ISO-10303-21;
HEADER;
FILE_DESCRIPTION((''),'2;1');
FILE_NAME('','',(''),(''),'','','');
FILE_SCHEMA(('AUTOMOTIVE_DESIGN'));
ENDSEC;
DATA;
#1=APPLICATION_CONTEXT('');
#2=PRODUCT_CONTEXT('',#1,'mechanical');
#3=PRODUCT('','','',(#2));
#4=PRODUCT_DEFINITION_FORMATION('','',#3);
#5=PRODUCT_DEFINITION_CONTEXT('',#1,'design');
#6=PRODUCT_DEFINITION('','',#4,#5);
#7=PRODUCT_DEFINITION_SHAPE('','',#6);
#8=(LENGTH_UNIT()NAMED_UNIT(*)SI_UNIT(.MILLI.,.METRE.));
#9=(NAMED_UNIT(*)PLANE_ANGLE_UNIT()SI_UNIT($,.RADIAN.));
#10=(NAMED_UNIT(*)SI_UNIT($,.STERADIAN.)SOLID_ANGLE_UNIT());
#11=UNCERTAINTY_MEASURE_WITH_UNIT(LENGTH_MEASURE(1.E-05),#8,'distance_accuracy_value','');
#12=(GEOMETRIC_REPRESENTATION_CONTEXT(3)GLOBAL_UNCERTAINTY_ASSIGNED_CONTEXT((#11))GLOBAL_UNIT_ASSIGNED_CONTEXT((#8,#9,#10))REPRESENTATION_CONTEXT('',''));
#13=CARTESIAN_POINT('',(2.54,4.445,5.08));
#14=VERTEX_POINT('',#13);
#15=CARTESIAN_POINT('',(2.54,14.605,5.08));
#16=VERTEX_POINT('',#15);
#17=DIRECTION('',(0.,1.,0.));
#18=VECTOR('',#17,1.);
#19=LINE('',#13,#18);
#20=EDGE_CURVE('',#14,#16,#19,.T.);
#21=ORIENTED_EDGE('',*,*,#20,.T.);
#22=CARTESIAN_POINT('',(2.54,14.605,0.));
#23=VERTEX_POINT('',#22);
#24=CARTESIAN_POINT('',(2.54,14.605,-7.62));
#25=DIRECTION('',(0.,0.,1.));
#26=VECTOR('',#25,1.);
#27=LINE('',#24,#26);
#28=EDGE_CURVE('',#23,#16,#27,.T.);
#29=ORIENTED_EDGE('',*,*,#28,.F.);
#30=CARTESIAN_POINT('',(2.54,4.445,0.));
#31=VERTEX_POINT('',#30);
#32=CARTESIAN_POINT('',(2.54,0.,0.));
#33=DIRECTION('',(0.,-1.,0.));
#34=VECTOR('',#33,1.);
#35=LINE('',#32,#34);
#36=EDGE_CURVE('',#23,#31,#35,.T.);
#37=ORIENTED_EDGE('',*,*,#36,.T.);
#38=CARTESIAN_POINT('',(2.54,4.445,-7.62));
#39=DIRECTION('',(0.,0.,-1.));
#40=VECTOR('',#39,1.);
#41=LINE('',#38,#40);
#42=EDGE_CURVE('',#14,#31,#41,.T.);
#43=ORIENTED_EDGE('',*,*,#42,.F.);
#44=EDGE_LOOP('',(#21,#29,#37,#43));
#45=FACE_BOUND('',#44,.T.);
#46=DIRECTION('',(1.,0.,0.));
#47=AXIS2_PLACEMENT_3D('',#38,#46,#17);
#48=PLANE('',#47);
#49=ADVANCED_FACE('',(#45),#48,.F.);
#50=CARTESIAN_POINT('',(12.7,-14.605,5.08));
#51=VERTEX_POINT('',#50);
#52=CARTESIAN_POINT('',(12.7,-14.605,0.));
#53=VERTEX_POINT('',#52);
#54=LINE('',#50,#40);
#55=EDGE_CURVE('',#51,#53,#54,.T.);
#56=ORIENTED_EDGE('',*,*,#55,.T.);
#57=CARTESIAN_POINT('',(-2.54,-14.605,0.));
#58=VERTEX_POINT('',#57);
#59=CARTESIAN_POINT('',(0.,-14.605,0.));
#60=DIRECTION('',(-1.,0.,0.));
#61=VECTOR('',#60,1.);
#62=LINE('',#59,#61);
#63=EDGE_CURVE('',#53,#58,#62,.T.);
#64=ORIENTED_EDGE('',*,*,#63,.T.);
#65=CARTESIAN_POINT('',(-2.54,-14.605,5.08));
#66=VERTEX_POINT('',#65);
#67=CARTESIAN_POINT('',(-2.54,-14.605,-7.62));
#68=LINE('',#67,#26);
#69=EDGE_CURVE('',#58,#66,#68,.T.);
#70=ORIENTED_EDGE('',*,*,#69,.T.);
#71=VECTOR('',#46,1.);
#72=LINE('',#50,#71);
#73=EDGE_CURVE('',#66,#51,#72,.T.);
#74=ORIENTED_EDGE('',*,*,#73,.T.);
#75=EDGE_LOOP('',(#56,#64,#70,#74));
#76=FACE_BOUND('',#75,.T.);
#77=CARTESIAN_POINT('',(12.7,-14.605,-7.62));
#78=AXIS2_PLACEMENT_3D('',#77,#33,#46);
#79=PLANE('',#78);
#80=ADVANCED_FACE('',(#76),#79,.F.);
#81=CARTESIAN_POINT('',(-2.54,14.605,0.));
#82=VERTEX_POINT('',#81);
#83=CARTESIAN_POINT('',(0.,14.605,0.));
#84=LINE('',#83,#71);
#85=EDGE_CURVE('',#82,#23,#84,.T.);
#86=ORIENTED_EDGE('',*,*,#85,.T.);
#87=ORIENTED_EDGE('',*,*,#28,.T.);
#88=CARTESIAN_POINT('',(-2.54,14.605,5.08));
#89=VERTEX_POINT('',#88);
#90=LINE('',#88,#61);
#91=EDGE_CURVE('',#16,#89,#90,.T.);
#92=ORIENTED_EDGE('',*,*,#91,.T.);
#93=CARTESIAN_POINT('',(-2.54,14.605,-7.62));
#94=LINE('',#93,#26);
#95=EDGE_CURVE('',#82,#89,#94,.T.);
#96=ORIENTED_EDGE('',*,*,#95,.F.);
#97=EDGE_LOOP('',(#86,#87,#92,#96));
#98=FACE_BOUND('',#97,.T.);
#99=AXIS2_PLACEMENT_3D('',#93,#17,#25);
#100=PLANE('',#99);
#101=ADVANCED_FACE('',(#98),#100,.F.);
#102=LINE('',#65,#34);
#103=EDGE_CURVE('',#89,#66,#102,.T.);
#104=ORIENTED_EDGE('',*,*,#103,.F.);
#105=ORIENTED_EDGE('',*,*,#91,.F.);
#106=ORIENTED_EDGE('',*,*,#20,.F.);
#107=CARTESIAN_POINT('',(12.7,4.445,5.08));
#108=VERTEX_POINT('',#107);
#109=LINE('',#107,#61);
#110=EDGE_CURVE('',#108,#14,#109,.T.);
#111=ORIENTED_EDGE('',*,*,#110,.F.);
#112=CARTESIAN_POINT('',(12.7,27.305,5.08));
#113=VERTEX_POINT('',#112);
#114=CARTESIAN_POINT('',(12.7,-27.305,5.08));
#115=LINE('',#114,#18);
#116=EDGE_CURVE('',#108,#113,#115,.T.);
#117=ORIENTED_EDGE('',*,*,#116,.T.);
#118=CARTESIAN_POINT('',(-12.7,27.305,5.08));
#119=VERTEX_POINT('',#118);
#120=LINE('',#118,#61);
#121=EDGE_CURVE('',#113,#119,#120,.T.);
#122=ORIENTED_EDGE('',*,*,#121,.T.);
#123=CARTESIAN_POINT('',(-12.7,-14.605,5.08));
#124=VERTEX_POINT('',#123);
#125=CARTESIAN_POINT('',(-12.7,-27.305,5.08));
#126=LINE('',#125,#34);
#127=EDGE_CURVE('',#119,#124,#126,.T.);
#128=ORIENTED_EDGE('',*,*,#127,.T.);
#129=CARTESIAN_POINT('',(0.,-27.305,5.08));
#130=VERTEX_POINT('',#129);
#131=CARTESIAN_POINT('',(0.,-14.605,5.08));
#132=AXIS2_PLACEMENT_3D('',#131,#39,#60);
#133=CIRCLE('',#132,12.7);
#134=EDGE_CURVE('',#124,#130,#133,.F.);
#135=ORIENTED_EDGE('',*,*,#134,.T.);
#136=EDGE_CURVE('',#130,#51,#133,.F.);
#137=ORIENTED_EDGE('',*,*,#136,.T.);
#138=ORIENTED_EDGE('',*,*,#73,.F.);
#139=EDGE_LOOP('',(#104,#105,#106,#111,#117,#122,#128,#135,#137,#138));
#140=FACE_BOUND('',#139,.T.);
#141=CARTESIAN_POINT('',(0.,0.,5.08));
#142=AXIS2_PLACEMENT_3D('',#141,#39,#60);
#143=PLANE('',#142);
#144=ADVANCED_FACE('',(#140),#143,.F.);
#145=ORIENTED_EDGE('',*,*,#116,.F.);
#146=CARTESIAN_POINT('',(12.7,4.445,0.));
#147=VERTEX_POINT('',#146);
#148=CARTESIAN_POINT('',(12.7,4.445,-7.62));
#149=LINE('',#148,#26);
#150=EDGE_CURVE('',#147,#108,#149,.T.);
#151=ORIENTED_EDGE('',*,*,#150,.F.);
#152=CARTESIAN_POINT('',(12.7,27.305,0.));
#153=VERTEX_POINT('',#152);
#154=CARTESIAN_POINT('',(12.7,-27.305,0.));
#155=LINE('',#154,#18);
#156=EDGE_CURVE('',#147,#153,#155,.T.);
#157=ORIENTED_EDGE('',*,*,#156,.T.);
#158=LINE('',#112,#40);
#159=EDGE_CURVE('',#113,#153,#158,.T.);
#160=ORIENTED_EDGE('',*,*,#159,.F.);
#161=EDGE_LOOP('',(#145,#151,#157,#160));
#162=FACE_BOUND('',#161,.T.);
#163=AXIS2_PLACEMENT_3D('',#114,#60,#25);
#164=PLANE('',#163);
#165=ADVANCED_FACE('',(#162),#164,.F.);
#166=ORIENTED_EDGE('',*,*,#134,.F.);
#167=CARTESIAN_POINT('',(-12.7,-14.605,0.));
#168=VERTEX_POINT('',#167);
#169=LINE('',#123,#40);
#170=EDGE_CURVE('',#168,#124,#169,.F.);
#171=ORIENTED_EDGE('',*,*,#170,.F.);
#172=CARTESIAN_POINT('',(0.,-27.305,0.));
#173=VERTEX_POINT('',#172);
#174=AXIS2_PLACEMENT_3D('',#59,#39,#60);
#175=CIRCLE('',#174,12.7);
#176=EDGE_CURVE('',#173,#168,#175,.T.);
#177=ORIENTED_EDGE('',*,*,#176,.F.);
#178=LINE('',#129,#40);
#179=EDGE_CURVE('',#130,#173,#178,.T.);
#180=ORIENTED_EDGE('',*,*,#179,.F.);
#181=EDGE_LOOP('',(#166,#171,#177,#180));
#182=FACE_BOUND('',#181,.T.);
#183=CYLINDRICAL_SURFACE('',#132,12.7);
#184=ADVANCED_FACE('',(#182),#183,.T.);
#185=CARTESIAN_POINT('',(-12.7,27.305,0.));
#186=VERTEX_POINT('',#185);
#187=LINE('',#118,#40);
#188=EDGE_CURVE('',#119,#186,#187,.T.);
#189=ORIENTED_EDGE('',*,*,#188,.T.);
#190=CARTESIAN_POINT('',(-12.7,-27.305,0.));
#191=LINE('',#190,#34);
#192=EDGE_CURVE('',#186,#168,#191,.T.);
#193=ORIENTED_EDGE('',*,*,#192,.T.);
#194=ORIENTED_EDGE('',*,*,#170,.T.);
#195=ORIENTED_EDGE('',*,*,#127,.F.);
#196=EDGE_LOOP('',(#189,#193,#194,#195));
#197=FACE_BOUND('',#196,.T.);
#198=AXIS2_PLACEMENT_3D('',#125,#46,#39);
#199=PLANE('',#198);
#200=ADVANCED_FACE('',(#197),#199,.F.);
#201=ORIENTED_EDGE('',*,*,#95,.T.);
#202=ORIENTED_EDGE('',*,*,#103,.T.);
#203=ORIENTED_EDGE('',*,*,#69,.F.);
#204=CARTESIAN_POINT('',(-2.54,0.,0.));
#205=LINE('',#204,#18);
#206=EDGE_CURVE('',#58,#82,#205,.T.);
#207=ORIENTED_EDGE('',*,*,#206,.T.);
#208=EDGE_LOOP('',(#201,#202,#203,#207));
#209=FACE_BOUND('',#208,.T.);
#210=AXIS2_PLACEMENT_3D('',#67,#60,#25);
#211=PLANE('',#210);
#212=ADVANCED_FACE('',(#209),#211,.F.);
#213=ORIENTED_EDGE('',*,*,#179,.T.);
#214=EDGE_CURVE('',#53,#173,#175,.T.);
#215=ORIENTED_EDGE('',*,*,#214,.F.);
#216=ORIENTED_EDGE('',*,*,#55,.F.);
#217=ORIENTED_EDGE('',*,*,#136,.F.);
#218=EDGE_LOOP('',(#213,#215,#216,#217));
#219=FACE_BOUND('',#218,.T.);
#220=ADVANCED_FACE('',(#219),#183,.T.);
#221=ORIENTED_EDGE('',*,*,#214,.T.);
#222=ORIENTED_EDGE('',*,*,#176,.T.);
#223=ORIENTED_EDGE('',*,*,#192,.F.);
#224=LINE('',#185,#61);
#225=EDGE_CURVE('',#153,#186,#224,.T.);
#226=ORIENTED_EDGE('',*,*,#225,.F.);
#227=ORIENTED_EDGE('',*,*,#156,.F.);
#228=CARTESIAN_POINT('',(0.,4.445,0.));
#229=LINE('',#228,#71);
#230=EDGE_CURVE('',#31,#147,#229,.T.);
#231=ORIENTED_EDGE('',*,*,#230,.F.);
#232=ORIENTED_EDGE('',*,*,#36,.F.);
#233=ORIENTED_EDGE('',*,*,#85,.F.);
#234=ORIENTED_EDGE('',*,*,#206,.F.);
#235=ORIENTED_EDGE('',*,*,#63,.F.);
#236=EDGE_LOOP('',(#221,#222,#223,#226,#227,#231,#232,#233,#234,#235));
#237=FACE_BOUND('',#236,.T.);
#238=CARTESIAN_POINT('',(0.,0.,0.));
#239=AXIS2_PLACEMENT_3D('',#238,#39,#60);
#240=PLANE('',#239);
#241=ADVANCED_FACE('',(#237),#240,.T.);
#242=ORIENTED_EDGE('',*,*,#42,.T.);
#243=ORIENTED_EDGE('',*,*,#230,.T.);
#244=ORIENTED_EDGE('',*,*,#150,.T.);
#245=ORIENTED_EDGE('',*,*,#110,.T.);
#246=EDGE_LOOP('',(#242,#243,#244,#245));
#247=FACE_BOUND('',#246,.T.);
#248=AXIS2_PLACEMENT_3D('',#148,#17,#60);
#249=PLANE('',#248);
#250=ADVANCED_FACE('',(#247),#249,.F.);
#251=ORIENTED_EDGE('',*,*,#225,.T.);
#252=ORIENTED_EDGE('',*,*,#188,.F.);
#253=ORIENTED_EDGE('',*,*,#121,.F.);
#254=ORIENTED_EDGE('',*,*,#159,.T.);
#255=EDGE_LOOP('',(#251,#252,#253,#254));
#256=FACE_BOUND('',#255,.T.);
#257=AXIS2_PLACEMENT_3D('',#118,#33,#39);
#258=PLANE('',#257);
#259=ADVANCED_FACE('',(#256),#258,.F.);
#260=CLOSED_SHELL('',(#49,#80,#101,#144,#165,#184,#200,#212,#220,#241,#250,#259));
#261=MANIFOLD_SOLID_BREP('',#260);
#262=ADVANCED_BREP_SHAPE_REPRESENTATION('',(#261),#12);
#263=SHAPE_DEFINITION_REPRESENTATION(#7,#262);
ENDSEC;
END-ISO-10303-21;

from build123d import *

# Parameters (mm, degrees)
SKETCH1_W           = 25.4
SKETCH1_H           = 54.61
BOSS_EXTRUDE1_DEPTH = 5.08
FILLET1_R           = 12.7
SKETCH2_W           = 15.24
SKETCH2_H           = 19.05
CUT_EXTRUDE1_DEPTH  = 12.7
SKETCH3_W           = 5.08
SKETCH3_H           = 10.16
CUT_EXTRUDE2_DEPTH  = 12.7


with BuildPart() as part:
    # Sketch1 → Boss-Extrude1 (new body)
    with BuildSketch(Plane.XY):
        Rectangle(SKETCH1_W, SKETCH1_H)
    extrude(amount=BOSS_EXTRUDE1_DEPTH)

    # Fillet1
    fillet1_edges = [part.edges().sort_by_distance(p)[0] for p in [
        (12.7, -27.305, 2.54),
        (-12.7, -27.305, 2.54),
    ]]
    fillet(fillet1_edges, radius=FILLET1_R - 0.0001)  # a hair under: the kernel refuses the full size

    # Sketch2 → Cut-Extrude1 (cut)
    with BuildSketch(Plane.XY.offset(5.08)):
        with Locations((5.08, -5.08)):
            Rectangle(SKETCH2_W, SKETCH2_H)
    extrude(amount=-CUT_EXTRUDE1_DEPTH, mode=Mode.SUBTRACT)

    # Sketch3 → Cut-Extrude2 (cut)
    with BuildSketch(Plane.XY.offset(5.08)):
        with Locations((0, 9.525)):
            Rectangle(SKETCH3_W, SKETCH3_H)
    extrude(amount=-CUT_EXTRUDE2_DEPTH, mode=Mode.SUBTRACT)


solid = part.part
